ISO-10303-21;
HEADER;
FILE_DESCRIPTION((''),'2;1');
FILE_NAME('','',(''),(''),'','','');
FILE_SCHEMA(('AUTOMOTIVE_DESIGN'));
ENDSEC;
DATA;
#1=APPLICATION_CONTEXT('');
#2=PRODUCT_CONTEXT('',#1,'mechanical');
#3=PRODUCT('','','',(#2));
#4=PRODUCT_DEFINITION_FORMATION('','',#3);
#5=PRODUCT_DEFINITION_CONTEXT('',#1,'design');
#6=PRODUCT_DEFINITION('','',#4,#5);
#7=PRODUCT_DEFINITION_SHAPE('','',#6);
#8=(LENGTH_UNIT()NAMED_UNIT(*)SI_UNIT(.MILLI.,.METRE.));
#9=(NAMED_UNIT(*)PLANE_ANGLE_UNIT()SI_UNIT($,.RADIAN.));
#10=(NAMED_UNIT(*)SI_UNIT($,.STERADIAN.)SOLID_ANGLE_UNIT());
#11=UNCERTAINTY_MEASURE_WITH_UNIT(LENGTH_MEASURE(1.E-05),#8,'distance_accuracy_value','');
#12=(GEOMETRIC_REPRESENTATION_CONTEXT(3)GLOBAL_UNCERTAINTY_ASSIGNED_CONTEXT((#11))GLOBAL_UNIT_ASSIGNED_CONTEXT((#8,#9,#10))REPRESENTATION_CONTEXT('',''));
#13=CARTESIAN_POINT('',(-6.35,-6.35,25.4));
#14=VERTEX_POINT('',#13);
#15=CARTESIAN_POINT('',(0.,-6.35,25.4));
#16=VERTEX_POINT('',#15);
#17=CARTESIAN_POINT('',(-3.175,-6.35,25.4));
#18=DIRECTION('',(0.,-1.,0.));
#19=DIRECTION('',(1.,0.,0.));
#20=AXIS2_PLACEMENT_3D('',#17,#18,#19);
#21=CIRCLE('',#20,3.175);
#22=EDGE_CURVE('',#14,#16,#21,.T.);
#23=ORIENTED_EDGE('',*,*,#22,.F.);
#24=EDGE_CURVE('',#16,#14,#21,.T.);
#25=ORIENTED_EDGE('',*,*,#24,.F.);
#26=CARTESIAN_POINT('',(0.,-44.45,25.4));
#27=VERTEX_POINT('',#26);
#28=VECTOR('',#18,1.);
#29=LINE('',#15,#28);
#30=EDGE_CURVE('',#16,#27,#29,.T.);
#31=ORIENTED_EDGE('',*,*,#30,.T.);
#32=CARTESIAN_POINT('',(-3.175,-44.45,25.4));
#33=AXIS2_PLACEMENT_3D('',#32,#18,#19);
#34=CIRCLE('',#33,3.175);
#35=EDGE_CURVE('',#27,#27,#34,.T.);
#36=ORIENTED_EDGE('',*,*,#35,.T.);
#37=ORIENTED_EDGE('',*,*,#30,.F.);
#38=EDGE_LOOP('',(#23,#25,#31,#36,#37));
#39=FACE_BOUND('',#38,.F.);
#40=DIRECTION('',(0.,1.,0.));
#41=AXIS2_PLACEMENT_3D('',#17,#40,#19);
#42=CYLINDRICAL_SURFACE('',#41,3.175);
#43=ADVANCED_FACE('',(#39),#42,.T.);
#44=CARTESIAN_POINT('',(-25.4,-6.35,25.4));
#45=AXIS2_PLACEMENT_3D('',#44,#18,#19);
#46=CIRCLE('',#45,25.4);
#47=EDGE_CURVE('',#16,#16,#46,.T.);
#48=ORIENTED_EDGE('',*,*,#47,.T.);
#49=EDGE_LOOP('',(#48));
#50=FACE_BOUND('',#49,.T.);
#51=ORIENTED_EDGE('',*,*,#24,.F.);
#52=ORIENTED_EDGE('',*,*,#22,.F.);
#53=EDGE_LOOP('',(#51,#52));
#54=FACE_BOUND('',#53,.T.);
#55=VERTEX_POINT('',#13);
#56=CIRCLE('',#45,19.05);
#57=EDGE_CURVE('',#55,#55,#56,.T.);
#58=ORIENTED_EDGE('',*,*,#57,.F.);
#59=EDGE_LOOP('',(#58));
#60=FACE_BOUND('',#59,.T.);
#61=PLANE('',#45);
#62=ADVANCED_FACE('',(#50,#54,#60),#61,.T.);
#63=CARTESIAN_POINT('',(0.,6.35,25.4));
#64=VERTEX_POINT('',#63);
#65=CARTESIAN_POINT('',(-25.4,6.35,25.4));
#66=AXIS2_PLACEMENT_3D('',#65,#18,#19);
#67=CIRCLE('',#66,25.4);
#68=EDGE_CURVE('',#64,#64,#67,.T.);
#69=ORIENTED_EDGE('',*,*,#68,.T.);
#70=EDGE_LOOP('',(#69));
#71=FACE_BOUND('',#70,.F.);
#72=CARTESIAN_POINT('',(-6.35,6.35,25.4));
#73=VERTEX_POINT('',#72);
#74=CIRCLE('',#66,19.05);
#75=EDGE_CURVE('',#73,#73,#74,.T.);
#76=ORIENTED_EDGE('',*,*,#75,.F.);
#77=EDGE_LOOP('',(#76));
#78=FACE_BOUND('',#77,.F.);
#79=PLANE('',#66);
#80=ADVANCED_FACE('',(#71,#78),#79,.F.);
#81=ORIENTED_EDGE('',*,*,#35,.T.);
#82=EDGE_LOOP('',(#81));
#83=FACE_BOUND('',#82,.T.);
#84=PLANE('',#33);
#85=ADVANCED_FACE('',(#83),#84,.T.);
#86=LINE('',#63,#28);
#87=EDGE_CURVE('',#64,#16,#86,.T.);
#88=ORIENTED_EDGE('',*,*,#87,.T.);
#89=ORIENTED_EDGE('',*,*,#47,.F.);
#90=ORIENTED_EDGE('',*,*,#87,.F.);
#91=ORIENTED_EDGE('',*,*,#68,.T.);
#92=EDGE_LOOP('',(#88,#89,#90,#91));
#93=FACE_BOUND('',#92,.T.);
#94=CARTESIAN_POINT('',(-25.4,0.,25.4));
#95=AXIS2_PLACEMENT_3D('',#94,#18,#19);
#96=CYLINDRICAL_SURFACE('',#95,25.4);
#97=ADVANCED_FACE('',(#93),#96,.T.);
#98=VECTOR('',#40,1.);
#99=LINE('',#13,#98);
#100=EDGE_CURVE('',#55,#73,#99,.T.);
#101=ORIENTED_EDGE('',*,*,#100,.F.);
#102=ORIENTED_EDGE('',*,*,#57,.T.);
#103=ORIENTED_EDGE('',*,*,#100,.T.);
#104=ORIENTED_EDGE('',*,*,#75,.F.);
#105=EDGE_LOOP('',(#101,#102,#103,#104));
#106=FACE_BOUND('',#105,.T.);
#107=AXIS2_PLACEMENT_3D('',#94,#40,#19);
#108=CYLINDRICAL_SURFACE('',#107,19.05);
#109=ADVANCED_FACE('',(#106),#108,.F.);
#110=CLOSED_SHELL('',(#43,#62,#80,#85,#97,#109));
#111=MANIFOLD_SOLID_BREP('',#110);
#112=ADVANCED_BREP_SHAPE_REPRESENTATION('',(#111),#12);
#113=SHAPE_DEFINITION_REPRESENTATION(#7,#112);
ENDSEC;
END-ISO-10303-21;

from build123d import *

# Parameters (mm, degrees)
F0_R     = 25.4
F0_R_2   = 19.05
F1_DEPTH = 6.35
F3_DEPTH = 38.1


with BuildPart() as f1:
    # F0 (on Front) → F1 (new body, symmetric)
    with BuildSketch(Plane.XZ):
        with Locations((-25.4, 25.4)):
            Circle(F0_R)
        with Locations((-25.4, 25.4)):
            Circle(F0_R_2, mode=Mode.SUBTRACT)
    extrude(amount=F1_DEPTH, both=True)

    # F2 (on face) → F3 (join)
    with BuildSketch(Plane.XZ.offset(6.35)):
        with BuildLine():
            ThreePointArc((-6.35, 25.4), (-3.175, 22.225), (0, 25.4))
            ThreePointArc((0, 25.4), (-3.175, 28.575), (-6.35, 25.4))
        make_face()
    extrude(amount=F3_DEPTH)


solid = f1.part
